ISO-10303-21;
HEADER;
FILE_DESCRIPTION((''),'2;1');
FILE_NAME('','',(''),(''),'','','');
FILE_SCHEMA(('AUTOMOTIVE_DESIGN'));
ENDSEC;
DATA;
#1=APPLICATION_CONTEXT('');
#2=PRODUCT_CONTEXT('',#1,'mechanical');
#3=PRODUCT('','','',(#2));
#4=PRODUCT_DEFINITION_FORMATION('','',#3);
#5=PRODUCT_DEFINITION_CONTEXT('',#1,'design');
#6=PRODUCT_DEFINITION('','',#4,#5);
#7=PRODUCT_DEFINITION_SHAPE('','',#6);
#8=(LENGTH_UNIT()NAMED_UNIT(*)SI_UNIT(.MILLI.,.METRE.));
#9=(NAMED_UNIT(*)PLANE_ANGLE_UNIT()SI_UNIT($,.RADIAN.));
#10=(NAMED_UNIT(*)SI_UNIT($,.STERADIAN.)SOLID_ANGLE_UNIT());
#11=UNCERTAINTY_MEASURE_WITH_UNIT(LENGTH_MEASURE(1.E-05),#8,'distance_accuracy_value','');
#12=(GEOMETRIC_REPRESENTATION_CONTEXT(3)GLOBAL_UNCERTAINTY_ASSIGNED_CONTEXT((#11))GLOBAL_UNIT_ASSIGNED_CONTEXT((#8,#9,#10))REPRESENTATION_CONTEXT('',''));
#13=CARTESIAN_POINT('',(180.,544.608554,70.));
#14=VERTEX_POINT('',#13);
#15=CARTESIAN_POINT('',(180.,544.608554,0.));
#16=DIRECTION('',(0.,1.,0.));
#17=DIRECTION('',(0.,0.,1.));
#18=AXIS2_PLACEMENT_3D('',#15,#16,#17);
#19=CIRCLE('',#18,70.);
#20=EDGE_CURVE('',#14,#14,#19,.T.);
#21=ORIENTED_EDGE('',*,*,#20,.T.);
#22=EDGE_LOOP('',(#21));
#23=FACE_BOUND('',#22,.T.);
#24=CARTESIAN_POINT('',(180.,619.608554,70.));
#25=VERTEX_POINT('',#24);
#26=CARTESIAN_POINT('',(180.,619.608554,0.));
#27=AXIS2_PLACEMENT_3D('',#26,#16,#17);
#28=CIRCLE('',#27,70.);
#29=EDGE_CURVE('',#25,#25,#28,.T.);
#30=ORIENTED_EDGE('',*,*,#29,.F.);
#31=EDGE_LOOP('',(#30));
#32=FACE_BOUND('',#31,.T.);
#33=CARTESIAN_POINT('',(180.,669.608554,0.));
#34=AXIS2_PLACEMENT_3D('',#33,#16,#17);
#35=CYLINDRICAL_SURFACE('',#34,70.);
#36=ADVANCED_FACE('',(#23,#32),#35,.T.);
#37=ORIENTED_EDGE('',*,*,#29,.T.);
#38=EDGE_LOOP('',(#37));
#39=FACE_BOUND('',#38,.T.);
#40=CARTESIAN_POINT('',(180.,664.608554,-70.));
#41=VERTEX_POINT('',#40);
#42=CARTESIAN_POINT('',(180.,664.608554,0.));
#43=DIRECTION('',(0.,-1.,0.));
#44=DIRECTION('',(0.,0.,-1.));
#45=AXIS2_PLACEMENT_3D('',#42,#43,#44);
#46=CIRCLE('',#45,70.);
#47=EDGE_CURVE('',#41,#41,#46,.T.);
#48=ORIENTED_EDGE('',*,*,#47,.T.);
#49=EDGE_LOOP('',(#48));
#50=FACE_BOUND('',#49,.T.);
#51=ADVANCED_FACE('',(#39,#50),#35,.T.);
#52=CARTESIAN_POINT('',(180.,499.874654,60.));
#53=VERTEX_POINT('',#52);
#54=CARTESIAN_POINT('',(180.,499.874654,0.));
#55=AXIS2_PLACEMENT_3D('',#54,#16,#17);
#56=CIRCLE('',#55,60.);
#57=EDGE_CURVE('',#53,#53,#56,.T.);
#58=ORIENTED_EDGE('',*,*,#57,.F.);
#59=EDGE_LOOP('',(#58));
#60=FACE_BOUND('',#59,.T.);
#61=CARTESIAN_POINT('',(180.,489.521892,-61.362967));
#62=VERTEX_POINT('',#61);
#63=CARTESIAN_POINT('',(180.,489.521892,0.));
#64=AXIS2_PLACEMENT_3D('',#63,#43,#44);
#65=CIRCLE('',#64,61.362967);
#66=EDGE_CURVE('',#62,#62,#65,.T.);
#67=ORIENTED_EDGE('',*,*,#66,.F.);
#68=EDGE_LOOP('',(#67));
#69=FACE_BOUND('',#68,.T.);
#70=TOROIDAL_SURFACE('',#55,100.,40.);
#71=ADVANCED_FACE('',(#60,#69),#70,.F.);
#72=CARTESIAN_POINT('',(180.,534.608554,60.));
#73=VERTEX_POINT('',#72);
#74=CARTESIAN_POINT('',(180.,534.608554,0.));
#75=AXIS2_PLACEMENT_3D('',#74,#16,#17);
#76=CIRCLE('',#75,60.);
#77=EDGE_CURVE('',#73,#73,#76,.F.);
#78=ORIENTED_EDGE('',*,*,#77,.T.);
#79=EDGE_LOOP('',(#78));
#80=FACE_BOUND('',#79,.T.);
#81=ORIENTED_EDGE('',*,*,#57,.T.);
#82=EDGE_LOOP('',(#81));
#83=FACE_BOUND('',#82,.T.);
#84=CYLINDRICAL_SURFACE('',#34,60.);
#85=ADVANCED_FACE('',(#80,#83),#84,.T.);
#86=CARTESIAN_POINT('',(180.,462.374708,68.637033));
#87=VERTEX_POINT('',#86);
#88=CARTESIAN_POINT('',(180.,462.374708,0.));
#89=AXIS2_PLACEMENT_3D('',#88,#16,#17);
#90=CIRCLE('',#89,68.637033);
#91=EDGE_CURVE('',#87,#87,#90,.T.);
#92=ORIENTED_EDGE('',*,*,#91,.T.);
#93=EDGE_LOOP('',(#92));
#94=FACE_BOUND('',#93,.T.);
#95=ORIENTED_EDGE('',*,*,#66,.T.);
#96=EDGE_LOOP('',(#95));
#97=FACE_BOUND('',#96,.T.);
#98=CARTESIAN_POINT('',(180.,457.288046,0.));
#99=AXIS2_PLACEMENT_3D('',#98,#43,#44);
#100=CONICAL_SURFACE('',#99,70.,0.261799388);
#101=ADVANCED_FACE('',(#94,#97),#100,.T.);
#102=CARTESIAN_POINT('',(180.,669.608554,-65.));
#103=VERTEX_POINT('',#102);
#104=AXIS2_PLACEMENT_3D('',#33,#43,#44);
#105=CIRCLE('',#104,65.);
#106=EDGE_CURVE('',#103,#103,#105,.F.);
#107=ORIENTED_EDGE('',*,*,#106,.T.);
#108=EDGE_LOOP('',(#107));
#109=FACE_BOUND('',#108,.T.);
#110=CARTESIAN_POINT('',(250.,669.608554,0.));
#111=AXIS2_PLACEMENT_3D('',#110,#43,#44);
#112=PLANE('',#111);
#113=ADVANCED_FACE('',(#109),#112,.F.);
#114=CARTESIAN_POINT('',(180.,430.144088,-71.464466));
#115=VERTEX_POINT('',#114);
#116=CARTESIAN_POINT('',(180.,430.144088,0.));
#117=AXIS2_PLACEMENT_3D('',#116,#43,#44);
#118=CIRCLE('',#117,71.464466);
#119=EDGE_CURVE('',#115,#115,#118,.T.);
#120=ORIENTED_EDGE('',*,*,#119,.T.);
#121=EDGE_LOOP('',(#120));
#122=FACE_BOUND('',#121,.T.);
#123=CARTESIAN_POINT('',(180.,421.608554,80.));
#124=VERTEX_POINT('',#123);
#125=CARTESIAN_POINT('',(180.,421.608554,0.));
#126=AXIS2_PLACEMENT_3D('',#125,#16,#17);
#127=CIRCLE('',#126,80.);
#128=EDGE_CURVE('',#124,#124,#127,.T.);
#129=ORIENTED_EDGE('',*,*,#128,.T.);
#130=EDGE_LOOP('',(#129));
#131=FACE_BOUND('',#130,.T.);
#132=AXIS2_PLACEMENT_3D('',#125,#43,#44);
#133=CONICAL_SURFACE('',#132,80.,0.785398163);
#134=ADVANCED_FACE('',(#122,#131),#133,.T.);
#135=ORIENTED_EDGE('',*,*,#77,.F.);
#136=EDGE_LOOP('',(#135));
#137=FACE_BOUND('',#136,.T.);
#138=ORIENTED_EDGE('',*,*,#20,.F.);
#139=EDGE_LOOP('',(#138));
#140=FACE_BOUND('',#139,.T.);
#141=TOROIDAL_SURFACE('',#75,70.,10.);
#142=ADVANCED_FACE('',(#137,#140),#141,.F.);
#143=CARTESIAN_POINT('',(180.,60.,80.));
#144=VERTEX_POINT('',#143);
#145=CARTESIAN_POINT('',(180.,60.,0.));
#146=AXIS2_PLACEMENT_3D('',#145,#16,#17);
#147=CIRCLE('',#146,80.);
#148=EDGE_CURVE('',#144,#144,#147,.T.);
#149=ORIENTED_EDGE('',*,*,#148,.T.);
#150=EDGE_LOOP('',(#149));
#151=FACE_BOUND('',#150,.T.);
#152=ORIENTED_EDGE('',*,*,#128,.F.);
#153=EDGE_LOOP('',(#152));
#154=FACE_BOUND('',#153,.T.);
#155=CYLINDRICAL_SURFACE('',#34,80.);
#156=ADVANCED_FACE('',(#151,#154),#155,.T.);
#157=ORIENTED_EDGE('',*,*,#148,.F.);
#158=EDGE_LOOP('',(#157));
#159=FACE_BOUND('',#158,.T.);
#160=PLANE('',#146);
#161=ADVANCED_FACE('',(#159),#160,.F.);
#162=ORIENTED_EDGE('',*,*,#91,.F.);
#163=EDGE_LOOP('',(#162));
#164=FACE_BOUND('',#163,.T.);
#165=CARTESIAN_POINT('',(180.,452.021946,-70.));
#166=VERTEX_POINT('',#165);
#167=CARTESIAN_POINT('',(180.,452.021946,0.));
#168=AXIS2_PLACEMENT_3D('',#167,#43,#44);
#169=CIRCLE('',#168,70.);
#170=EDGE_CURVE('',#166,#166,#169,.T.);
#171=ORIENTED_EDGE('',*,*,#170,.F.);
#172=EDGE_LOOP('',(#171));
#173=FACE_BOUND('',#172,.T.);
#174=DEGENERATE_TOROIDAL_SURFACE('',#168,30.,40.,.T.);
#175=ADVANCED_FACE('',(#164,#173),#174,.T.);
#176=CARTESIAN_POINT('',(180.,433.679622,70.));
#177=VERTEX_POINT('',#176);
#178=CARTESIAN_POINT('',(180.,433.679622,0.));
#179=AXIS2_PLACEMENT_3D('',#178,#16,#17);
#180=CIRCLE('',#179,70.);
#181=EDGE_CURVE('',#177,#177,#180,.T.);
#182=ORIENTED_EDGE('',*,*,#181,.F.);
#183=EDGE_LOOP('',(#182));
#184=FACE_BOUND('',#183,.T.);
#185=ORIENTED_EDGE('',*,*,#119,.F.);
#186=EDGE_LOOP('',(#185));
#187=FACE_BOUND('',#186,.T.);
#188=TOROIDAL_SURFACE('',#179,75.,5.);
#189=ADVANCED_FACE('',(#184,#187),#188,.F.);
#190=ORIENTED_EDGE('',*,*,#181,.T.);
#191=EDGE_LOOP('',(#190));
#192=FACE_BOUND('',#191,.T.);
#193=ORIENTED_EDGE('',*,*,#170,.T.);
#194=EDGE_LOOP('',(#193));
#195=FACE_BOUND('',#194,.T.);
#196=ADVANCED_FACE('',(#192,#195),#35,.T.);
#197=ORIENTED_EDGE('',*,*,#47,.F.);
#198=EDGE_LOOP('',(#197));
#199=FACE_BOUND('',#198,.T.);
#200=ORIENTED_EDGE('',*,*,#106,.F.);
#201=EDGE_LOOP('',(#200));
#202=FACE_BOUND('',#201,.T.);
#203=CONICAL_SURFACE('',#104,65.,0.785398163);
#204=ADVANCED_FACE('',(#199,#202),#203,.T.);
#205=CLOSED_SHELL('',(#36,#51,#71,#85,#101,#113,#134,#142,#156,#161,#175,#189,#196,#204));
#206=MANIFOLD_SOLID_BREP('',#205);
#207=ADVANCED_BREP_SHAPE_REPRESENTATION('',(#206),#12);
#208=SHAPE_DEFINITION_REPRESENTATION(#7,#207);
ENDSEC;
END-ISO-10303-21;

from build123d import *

# Parameters (mm, degrees)
CHAMFER1_SIZE = 5
FILLET1_R     = 10
FILLET2_R     = 40
FILLET3_R     = 5


with BuildPart() as part:
    # Sketch25 → Revolve1 (revolve)
    with BuildSketch(Plane.XY, mode=Mode.PRIVATE) as revolve1_sk:
        Polygon((180, 60), (260, 60), (260, 421.608554244), (250, 431.608554244), (250, 457.288046169), (240, 494.608554244), (240, 544.608554244), (250, 544.608554244), (250, 669.608554244), (180, 669.608554244), align=None)
    revolve(revolve1_sk.sketch.rotate(Axis((180, 669.608554244, 0), (0, -1, 0)), 90), axis=Axis((180, 669.608554244, 0), (0, -1, 0)))

    # Chamfer1
    chamfer1_edges = [part.edges().sort_by_distance(p)[0] for p in [
        (180, 669.608554244, -70),
    ]]
    chamfer(chamfer1_edges, length=CHAMFER1_SIZE)

    # Fillet1
    fillet1_edges = [part.edges().sort_by_distance(p)[0] for p in [
        (180, 544.608554244, -60),
    ]]
    fillet(fillet1_edges, radius=FILLET1_R - 0.0001)  # a hair under: the kernel refuses the full size

    # Fillet2
    fillet2_edges = [part.edges().sort_by_distance(p)[0] for p in [
        (180, 494.608554244, -60),
        (180, 457.288046169, -70),
    ]]
    fillet(fillet2_edges, radius=FILLET2_R)

    # Fillet3
    fillet3_edges = [part.edges().sort_by_distance(p)[0] for p in [
        (180, 431.608554244, -70),
    ]]
    fillet(fillet3_edges, radius=FILLET3_R)


solid = part.part
